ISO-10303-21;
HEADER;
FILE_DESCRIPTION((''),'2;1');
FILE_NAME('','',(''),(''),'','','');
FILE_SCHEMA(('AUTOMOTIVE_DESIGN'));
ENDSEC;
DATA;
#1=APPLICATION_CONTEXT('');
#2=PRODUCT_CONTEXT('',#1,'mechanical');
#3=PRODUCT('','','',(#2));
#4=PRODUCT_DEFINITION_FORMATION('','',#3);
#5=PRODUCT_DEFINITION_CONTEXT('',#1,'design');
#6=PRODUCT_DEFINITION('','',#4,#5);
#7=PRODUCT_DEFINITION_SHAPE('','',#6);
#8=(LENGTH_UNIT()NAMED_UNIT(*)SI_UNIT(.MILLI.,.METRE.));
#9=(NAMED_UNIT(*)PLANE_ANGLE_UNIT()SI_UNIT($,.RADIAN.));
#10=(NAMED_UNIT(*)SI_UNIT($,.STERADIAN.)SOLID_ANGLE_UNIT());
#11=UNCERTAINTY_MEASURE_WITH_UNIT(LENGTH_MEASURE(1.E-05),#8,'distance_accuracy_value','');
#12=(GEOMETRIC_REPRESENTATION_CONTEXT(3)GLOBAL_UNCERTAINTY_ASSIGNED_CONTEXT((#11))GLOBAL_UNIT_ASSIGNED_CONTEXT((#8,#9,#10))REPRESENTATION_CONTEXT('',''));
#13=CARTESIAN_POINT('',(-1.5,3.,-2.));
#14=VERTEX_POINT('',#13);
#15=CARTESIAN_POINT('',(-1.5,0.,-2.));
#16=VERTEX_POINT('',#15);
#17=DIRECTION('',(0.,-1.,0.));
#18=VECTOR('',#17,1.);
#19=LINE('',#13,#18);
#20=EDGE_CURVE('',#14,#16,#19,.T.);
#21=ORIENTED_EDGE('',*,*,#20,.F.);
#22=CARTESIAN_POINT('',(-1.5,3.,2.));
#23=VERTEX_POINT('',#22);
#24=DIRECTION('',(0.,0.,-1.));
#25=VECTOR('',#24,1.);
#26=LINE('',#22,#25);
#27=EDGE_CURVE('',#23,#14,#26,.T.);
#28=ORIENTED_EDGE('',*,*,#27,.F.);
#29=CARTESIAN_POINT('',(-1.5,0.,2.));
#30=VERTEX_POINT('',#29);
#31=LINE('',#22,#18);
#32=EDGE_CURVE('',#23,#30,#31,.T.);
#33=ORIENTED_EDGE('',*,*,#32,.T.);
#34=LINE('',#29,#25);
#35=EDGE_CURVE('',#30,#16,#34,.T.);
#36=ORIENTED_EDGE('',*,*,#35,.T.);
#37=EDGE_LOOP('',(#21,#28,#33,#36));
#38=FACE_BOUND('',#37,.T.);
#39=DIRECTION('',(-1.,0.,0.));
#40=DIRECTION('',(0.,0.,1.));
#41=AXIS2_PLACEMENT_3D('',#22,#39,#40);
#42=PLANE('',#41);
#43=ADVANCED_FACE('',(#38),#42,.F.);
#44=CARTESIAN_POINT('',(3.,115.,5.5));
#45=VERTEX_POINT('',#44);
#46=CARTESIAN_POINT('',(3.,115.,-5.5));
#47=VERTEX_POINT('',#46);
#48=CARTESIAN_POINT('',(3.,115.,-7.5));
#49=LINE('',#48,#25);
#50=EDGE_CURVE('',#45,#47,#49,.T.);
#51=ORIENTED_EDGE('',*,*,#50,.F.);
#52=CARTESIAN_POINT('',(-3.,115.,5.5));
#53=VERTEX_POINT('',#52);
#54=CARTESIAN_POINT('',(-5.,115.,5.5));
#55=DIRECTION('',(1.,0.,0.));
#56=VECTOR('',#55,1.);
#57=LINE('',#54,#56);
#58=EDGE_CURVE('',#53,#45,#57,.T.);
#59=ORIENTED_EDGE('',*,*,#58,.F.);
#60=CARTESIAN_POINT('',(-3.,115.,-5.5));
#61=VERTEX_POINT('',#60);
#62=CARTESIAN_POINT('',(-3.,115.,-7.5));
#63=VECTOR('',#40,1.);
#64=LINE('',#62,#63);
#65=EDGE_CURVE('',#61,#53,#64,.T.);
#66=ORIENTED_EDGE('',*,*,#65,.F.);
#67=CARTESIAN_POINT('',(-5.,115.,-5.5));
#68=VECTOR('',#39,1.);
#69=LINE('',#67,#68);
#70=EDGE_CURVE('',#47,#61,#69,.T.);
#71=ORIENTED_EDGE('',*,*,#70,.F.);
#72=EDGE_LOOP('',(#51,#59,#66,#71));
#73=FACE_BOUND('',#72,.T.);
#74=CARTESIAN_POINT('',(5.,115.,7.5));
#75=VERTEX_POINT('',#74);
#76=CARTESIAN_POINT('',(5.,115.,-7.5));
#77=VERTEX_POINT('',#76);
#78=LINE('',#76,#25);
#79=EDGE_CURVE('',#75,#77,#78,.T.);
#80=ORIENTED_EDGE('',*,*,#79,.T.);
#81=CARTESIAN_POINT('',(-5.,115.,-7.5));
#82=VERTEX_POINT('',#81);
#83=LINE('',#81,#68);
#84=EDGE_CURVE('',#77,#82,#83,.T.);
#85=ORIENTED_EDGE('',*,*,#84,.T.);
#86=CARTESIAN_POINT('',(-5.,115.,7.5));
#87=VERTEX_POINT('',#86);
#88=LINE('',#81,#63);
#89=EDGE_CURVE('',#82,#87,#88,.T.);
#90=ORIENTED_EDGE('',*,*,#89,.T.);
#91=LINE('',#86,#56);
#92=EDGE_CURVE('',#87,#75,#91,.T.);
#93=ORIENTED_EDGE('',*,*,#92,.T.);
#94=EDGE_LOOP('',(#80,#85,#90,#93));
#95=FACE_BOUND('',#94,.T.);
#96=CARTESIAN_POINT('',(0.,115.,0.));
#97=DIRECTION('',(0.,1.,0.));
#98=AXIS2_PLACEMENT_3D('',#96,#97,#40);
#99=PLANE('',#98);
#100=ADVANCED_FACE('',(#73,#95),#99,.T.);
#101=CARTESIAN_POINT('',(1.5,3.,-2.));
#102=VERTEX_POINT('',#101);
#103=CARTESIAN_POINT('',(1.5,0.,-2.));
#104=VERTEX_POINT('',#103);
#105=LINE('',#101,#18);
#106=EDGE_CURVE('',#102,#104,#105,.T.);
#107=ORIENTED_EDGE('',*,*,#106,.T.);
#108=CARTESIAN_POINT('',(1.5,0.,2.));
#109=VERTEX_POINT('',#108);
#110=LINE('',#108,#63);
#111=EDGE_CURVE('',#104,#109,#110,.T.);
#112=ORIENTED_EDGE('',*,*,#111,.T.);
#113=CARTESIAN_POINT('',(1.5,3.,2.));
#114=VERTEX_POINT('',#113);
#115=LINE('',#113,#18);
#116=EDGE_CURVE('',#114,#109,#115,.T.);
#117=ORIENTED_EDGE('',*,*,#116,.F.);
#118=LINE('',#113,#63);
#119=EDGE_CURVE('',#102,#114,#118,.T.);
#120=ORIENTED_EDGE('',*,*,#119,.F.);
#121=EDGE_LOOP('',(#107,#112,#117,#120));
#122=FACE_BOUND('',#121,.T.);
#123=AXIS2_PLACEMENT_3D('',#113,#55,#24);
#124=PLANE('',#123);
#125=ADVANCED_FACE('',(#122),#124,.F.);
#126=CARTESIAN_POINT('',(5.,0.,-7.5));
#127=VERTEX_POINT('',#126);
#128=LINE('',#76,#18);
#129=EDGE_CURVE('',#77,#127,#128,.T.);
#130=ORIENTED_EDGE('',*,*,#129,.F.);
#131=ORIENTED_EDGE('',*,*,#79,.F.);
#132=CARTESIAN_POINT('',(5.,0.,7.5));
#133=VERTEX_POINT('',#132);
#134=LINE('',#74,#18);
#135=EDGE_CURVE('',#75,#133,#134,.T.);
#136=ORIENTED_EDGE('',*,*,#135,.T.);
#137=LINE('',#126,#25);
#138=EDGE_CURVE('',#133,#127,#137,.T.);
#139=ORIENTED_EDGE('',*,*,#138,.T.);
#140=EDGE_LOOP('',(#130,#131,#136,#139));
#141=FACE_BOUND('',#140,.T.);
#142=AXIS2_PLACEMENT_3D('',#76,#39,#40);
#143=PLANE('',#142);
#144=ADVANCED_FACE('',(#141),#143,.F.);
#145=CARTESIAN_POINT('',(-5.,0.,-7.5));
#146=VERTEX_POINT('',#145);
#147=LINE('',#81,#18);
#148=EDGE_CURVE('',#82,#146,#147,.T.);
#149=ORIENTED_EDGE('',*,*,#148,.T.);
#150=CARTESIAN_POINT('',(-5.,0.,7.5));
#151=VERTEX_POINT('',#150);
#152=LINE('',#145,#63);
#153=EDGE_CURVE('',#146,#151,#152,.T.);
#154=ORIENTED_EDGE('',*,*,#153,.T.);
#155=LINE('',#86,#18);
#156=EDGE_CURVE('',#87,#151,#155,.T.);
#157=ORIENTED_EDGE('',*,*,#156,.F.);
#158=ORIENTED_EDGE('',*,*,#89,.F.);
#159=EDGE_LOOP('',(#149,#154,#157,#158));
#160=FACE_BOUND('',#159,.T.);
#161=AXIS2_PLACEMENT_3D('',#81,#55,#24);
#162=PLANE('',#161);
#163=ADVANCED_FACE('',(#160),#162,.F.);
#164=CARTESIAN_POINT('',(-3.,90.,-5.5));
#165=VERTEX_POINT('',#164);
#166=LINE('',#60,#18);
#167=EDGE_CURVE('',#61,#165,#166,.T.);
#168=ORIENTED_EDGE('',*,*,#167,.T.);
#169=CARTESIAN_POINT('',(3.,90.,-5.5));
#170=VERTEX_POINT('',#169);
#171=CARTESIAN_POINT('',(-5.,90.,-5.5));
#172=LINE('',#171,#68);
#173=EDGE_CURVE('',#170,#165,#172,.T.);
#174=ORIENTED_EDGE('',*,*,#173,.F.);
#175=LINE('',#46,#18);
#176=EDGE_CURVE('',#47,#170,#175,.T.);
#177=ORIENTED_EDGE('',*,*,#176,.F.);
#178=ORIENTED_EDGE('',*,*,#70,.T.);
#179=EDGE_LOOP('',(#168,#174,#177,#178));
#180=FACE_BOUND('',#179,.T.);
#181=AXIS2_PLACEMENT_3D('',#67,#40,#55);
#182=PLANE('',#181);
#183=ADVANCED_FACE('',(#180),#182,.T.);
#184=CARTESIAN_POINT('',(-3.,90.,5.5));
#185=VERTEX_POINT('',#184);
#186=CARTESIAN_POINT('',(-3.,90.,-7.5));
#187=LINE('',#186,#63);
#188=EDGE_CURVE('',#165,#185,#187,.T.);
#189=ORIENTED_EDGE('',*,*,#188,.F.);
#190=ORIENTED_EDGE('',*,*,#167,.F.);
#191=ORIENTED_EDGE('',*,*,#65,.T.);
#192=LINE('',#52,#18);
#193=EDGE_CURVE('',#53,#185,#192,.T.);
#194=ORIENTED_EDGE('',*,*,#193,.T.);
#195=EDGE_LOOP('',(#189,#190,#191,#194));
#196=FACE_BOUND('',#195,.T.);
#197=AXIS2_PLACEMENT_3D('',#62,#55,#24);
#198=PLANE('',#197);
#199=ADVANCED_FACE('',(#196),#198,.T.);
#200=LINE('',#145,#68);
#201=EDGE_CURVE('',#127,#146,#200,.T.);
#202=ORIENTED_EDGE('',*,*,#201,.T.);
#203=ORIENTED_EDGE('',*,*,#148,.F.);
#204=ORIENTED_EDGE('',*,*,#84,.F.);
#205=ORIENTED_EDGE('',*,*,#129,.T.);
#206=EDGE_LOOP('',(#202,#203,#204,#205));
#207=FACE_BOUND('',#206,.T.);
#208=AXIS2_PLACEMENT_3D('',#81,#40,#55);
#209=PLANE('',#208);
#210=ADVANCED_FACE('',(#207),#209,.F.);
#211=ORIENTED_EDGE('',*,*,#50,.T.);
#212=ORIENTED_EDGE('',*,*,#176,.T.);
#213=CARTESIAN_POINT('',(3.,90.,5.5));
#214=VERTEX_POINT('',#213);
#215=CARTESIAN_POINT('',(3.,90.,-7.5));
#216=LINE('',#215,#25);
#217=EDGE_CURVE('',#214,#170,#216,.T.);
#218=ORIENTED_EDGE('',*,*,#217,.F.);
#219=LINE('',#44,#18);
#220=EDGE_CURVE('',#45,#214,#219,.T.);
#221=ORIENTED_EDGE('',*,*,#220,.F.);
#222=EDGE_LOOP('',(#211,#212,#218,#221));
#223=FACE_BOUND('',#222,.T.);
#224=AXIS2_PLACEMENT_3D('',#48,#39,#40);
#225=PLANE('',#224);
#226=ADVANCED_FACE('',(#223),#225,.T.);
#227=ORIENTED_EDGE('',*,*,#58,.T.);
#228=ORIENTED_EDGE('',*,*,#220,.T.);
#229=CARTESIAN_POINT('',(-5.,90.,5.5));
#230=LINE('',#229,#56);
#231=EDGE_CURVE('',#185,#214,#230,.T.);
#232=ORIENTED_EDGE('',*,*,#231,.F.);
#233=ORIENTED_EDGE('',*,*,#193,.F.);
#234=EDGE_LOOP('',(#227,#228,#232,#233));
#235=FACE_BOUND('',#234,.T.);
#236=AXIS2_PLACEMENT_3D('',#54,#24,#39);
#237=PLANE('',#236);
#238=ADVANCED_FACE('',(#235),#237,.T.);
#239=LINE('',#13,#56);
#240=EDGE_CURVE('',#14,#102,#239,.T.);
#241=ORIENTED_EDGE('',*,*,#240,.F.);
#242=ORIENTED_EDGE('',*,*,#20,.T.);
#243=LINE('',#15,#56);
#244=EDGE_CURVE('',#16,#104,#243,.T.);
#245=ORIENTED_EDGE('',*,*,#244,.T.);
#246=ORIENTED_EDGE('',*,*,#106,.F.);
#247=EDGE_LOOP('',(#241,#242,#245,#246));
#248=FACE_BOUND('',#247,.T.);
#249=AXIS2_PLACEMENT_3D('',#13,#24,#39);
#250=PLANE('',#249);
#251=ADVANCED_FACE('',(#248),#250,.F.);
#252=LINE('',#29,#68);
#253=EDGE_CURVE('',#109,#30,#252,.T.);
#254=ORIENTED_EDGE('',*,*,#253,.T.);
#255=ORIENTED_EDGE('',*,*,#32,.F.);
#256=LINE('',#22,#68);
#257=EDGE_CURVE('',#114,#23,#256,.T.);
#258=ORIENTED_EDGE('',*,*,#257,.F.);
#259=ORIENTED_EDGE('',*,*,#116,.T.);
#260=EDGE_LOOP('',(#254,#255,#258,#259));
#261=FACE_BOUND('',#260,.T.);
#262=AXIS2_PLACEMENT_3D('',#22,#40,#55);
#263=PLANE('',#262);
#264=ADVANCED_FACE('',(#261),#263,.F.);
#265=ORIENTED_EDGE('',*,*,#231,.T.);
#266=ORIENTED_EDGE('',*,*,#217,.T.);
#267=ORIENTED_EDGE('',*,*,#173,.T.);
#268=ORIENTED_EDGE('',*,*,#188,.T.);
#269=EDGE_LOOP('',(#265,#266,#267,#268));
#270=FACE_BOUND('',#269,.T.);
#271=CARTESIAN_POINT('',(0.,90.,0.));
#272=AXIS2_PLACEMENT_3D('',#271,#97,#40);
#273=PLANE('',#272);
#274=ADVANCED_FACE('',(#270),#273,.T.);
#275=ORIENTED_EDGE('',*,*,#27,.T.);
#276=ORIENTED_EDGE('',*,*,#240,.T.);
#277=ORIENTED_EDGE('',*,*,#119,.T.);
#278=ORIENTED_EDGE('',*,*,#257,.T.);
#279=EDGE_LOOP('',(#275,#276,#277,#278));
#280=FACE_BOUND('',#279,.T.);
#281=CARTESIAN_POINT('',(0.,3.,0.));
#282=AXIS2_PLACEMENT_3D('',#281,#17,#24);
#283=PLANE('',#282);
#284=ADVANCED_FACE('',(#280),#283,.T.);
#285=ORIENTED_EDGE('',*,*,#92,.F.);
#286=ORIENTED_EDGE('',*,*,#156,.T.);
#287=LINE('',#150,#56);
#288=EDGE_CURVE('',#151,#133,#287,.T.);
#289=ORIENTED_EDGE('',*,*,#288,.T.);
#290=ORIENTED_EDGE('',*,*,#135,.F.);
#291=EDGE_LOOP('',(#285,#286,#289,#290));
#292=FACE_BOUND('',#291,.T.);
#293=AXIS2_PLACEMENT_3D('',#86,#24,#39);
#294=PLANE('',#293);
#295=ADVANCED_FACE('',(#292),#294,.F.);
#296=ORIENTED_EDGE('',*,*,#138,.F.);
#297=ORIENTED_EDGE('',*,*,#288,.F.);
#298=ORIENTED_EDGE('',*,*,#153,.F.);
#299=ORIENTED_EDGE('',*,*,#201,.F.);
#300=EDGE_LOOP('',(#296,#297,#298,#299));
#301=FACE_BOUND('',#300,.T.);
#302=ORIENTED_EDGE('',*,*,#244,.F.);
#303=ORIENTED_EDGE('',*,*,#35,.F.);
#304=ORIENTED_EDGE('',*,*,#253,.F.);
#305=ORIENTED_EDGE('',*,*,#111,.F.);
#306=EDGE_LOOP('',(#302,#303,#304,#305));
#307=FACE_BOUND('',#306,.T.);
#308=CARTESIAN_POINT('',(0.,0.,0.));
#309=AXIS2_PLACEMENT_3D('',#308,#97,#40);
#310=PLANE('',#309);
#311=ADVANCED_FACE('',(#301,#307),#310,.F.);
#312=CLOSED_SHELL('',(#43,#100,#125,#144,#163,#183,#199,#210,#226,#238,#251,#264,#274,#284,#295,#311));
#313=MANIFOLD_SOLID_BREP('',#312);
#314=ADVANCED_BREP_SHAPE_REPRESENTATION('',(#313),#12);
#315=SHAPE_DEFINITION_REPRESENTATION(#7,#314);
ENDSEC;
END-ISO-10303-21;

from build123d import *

# Parameters (mm, degrees)
SKETCH1_W           = 10
SKETCH1_H           = 15
BOSS_EXTRUDE1_DEPTH = 115
SKETCH2_W           = 3
SKETCH2_H           = 4
CUT_EXTRUDE1_DEPTH  = 3
SHELL1_START        = 90
SHELL1_OUTLINE_W    = 6
SHELL1_OUTLINE_H    = 11
SHELL1_DEPTH        = 25


# Read off the part's stored shape, not the designer's step: Shell1
with BuildPart() as part:
    # Sketch1 → Boss-Extrude1 (new body)
    with BuildSketch(Plane(origin=(0, 0, 0), x_dir=(1, 0, 0), z_dir=(0, 1, 0))):
        Rectangle(SKETCH1_W, SKETCH1_H)
    extrude(amount=BOSS_EXTRUDE1_DEPTH)

    # Sketch2 → Cut-Extrude1 (cut)
    with BuildSketch(Plane.XZ):
        Rectangle(SKETCH2_W, SKETCH2_H)
    extrude(amount=-CUT_EXTRUDE1_DEPTH, mode=Mode.SUBTRACT)

    # Shell1 outline → Shell1 (cut)
    with BuildSketch(Plane(origin=(0, 0, 0), x_dir=(1, 0, 0), z_dir=(0, 1, 0)).offset(SHELL1_START)):
        Rectangle(SHELL1_OUTLINE_W, SHELL1_OUTLINE_H)
    extrude(amount=SHELL1_DEPTH, mode=Mode.SUBTRACT)


solid = part.part
